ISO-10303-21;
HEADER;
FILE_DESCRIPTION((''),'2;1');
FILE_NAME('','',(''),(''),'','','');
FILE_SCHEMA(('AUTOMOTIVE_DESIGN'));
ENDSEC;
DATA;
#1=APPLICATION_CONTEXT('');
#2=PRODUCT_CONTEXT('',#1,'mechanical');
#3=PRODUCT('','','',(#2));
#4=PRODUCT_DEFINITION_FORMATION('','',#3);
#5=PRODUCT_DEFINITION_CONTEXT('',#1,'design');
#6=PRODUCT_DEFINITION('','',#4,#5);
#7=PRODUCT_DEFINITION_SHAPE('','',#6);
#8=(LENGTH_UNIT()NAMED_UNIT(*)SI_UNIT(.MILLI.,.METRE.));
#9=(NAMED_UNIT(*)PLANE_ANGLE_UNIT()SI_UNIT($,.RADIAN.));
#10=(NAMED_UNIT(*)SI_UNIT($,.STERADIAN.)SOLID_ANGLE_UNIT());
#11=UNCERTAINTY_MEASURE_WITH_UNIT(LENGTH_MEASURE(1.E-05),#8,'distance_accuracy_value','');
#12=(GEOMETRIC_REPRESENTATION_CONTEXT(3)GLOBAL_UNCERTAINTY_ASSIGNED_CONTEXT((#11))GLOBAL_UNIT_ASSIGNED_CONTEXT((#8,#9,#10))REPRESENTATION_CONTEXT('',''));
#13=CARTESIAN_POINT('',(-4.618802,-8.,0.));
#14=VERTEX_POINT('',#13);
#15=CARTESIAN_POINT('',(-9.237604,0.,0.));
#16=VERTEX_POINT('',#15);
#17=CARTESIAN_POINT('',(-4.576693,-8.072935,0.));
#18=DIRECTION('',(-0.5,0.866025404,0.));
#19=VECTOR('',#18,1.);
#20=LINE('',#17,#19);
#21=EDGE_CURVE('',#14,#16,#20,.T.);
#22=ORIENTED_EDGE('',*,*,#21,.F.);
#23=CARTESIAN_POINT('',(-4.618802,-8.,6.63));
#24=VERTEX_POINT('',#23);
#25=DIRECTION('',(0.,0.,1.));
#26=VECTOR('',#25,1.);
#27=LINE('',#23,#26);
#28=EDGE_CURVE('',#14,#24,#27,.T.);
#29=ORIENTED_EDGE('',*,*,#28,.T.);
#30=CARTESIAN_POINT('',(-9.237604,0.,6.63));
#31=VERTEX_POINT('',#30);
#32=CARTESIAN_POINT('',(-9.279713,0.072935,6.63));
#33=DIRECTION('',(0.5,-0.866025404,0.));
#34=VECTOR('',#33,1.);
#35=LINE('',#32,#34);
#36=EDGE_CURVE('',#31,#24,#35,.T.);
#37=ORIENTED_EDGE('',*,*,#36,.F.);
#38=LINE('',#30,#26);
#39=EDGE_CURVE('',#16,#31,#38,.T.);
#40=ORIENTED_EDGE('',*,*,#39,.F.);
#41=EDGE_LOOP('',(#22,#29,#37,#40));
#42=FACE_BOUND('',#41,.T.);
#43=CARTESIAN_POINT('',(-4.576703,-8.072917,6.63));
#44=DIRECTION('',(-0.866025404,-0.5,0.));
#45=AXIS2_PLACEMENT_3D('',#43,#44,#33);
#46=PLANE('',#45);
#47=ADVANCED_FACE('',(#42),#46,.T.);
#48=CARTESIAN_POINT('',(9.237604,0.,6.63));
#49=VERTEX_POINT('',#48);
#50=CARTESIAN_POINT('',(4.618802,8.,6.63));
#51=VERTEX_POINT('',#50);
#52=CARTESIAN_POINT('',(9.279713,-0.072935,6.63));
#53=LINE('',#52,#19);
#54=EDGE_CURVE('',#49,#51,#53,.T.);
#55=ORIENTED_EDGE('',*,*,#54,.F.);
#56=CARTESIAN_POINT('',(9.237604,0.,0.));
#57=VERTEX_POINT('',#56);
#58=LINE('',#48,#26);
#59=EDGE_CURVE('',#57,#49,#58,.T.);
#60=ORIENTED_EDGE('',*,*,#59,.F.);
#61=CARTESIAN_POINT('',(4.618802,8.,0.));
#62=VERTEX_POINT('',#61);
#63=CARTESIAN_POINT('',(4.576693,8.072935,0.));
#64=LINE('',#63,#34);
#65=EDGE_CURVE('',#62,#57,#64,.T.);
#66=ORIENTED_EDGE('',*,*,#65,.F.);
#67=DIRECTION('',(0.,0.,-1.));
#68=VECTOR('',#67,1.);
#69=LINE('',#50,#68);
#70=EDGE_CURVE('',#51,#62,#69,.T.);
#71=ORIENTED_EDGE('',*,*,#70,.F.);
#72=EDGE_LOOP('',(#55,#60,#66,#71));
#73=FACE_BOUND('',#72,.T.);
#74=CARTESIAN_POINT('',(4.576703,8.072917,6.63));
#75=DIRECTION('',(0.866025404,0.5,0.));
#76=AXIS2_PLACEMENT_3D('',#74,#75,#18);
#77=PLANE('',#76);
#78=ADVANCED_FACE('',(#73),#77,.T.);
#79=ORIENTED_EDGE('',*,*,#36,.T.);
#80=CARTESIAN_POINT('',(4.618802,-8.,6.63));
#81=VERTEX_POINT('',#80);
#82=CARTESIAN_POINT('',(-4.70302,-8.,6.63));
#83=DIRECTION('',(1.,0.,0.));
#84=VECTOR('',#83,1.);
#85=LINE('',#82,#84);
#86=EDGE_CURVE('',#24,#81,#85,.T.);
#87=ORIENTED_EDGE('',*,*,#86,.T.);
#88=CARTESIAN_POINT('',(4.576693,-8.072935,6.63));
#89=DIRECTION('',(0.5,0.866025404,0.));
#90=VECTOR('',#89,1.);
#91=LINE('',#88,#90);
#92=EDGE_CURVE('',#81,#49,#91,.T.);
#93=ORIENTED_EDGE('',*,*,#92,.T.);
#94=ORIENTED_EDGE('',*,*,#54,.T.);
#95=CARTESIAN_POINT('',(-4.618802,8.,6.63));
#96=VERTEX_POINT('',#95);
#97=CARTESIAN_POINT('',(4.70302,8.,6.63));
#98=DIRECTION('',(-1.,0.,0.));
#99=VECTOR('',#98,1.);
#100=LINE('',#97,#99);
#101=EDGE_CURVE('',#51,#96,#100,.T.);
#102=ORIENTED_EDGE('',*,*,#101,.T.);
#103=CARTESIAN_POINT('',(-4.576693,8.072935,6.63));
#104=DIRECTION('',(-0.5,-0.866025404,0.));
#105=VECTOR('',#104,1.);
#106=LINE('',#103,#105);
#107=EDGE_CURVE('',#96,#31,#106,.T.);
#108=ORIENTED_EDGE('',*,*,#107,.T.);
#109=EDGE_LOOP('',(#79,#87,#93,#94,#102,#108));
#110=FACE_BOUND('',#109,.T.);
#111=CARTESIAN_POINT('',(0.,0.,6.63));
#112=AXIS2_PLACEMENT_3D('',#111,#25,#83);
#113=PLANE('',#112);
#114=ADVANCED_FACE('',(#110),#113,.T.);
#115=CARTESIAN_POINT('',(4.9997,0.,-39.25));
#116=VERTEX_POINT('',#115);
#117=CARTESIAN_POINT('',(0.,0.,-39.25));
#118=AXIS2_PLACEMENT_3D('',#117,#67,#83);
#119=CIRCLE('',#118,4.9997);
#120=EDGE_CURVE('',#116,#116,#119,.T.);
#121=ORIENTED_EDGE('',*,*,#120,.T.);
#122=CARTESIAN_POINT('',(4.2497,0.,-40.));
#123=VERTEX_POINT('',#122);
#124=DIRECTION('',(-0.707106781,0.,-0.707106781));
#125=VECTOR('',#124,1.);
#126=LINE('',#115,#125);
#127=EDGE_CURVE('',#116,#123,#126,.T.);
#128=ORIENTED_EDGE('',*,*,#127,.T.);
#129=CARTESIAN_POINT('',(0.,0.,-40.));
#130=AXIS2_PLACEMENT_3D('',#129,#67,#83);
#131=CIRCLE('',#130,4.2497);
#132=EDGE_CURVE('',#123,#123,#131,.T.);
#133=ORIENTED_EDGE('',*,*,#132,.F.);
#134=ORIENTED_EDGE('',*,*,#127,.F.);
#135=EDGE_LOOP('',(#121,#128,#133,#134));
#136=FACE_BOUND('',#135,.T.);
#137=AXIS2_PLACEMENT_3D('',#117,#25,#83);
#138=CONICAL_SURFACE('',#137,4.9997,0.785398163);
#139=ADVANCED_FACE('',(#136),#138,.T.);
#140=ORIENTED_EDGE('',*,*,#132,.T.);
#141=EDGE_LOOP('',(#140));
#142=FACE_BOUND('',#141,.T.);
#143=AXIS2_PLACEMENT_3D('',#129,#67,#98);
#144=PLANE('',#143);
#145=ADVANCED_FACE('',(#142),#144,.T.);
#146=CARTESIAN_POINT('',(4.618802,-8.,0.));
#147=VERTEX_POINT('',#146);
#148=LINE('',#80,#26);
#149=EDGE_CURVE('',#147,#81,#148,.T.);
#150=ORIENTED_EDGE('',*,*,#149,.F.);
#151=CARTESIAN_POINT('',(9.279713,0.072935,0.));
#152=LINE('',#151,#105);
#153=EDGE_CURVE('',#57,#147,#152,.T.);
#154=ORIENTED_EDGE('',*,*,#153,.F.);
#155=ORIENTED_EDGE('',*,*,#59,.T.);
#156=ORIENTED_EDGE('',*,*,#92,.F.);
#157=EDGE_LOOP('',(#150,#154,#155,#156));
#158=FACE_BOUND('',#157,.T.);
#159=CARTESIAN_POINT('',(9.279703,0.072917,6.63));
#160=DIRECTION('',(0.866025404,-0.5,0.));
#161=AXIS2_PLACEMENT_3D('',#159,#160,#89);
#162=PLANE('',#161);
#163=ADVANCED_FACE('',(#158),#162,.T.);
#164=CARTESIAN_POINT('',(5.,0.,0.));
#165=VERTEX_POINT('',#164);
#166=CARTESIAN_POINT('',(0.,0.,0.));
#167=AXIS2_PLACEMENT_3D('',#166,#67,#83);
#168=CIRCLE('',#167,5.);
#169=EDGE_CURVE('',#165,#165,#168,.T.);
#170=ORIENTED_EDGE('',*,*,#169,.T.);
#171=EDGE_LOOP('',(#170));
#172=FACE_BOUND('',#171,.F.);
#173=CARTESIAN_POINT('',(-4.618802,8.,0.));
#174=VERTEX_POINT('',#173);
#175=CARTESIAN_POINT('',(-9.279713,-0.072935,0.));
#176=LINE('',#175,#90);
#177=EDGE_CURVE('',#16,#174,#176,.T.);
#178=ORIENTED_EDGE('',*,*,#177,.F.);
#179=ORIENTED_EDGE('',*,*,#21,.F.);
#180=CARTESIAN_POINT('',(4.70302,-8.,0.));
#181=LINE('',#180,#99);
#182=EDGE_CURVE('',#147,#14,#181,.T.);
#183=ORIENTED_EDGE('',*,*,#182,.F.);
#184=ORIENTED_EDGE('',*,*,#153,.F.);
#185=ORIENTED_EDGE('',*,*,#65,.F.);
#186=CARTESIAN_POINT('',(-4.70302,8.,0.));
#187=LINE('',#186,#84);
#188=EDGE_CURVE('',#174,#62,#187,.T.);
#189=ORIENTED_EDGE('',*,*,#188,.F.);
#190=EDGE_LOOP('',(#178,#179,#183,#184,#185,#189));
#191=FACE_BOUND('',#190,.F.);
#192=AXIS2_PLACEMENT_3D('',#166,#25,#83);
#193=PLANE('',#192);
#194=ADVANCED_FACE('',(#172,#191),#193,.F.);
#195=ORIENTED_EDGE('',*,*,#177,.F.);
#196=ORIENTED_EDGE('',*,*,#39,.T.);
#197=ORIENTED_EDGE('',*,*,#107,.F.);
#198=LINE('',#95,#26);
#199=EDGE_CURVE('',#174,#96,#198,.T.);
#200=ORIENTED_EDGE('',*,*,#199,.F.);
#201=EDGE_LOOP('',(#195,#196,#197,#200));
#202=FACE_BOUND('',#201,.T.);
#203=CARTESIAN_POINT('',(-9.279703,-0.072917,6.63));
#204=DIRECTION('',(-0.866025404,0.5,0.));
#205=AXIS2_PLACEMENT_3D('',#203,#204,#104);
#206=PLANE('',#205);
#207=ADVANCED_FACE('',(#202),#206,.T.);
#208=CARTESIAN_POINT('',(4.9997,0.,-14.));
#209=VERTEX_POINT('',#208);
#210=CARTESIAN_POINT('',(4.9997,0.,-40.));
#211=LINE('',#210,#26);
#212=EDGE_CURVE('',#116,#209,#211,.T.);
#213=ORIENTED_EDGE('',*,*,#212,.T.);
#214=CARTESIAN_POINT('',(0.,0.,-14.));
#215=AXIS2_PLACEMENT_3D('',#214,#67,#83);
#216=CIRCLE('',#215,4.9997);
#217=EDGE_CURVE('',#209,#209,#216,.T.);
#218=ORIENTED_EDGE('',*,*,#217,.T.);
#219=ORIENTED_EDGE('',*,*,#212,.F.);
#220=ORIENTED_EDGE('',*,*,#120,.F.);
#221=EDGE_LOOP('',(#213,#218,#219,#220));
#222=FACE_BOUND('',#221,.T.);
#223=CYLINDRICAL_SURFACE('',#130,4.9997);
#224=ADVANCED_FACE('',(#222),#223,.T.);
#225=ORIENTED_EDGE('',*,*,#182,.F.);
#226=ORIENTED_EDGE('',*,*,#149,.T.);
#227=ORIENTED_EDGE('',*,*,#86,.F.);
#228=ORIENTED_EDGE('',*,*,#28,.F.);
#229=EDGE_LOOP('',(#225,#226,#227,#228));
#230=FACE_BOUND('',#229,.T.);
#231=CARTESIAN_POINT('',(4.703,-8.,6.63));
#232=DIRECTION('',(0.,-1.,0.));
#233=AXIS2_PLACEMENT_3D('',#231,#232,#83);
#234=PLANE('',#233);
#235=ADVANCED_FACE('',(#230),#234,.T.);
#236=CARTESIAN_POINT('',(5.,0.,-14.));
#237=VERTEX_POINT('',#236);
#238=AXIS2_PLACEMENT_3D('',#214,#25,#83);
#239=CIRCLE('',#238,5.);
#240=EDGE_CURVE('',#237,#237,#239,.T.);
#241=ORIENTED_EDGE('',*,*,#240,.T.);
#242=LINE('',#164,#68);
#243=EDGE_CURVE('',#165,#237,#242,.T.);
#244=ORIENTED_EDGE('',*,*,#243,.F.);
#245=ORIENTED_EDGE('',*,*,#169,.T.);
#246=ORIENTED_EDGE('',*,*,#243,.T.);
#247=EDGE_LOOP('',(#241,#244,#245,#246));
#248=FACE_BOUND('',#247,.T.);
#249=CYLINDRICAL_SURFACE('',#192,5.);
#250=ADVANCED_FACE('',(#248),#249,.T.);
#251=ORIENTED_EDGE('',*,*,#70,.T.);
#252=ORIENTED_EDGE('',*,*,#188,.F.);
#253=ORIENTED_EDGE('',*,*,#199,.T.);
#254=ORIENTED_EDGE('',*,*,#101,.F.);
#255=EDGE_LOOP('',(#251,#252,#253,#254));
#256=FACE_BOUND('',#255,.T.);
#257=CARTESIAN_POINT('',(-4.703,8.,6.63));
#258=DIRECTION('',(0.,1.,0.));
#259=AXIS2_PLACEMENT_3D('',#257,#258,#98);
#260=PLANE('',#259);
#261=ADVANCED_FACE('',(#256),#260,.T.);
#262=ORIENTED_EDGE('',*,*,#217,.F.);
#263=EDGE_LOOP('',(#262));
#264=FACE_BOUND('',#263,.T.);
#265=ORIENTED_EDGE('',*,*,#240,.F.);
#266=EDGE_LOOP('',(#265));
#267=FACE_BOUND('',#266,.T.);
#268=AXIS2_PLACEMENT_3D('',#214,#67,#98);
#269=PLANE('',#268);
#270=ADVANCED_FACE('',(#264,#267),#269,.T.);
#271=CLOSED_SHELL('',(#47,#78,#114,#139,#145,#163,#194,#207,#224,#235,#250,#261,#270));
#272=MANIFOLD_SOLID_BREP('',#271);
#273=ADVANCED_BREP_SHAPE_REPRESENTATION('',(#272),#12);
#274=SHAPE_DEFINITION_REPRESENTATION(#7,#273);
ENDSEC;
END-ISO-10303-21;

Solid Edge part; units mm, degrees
sketch "Sketch1" plane through (0, 0, 0) normal (0, 0, 1) x (1, 0, 0)
  circle A0 centre (0, 0) radius 9.28
  dimension "D1" = 18.56
extrude "Protrusion1" add sketch "Sketch1" along normal blind 6.63
sketch "Sketch2" plane through (0, 0, 0) normal (0, 0, -1) x (1, 0, 0)
  circle A0 centre (0, 0) radius 5
extrude "Protrusion2" add sketch "Sketch2" along normal blind 40
sketch "Sketch3" plane through (0, 0, -40) normal (0, 0, -1) x (1, 0, 0)
  circle A0 centre (0, 0) radius 4.9997
extrude "Cutout1" cut sketch "Sketch3" against normal blind 26 flip side to cut
chamfer "Chamfer_1" distance 0.75 angle 45 1 edges at (-4.9997, 0, -40)
sketch "Sketch4" plane through (0, 0, 6.63) normal (0, 0, 1) x (1, 0, 0)
  line L0 (-4.703, 8) -> (4.703, 8)
  dimension "D1" = 16
extrude "Cutout2" cut sketch "Sketch4" against normal up to next material side at (0, 8.05, 6.63)
pattern_circular "Pattern1" count 6 over 360 about axis through (0, 0, 6.63) along (0, 0, 1) of "Cutout2"
properties part number "24104868"
